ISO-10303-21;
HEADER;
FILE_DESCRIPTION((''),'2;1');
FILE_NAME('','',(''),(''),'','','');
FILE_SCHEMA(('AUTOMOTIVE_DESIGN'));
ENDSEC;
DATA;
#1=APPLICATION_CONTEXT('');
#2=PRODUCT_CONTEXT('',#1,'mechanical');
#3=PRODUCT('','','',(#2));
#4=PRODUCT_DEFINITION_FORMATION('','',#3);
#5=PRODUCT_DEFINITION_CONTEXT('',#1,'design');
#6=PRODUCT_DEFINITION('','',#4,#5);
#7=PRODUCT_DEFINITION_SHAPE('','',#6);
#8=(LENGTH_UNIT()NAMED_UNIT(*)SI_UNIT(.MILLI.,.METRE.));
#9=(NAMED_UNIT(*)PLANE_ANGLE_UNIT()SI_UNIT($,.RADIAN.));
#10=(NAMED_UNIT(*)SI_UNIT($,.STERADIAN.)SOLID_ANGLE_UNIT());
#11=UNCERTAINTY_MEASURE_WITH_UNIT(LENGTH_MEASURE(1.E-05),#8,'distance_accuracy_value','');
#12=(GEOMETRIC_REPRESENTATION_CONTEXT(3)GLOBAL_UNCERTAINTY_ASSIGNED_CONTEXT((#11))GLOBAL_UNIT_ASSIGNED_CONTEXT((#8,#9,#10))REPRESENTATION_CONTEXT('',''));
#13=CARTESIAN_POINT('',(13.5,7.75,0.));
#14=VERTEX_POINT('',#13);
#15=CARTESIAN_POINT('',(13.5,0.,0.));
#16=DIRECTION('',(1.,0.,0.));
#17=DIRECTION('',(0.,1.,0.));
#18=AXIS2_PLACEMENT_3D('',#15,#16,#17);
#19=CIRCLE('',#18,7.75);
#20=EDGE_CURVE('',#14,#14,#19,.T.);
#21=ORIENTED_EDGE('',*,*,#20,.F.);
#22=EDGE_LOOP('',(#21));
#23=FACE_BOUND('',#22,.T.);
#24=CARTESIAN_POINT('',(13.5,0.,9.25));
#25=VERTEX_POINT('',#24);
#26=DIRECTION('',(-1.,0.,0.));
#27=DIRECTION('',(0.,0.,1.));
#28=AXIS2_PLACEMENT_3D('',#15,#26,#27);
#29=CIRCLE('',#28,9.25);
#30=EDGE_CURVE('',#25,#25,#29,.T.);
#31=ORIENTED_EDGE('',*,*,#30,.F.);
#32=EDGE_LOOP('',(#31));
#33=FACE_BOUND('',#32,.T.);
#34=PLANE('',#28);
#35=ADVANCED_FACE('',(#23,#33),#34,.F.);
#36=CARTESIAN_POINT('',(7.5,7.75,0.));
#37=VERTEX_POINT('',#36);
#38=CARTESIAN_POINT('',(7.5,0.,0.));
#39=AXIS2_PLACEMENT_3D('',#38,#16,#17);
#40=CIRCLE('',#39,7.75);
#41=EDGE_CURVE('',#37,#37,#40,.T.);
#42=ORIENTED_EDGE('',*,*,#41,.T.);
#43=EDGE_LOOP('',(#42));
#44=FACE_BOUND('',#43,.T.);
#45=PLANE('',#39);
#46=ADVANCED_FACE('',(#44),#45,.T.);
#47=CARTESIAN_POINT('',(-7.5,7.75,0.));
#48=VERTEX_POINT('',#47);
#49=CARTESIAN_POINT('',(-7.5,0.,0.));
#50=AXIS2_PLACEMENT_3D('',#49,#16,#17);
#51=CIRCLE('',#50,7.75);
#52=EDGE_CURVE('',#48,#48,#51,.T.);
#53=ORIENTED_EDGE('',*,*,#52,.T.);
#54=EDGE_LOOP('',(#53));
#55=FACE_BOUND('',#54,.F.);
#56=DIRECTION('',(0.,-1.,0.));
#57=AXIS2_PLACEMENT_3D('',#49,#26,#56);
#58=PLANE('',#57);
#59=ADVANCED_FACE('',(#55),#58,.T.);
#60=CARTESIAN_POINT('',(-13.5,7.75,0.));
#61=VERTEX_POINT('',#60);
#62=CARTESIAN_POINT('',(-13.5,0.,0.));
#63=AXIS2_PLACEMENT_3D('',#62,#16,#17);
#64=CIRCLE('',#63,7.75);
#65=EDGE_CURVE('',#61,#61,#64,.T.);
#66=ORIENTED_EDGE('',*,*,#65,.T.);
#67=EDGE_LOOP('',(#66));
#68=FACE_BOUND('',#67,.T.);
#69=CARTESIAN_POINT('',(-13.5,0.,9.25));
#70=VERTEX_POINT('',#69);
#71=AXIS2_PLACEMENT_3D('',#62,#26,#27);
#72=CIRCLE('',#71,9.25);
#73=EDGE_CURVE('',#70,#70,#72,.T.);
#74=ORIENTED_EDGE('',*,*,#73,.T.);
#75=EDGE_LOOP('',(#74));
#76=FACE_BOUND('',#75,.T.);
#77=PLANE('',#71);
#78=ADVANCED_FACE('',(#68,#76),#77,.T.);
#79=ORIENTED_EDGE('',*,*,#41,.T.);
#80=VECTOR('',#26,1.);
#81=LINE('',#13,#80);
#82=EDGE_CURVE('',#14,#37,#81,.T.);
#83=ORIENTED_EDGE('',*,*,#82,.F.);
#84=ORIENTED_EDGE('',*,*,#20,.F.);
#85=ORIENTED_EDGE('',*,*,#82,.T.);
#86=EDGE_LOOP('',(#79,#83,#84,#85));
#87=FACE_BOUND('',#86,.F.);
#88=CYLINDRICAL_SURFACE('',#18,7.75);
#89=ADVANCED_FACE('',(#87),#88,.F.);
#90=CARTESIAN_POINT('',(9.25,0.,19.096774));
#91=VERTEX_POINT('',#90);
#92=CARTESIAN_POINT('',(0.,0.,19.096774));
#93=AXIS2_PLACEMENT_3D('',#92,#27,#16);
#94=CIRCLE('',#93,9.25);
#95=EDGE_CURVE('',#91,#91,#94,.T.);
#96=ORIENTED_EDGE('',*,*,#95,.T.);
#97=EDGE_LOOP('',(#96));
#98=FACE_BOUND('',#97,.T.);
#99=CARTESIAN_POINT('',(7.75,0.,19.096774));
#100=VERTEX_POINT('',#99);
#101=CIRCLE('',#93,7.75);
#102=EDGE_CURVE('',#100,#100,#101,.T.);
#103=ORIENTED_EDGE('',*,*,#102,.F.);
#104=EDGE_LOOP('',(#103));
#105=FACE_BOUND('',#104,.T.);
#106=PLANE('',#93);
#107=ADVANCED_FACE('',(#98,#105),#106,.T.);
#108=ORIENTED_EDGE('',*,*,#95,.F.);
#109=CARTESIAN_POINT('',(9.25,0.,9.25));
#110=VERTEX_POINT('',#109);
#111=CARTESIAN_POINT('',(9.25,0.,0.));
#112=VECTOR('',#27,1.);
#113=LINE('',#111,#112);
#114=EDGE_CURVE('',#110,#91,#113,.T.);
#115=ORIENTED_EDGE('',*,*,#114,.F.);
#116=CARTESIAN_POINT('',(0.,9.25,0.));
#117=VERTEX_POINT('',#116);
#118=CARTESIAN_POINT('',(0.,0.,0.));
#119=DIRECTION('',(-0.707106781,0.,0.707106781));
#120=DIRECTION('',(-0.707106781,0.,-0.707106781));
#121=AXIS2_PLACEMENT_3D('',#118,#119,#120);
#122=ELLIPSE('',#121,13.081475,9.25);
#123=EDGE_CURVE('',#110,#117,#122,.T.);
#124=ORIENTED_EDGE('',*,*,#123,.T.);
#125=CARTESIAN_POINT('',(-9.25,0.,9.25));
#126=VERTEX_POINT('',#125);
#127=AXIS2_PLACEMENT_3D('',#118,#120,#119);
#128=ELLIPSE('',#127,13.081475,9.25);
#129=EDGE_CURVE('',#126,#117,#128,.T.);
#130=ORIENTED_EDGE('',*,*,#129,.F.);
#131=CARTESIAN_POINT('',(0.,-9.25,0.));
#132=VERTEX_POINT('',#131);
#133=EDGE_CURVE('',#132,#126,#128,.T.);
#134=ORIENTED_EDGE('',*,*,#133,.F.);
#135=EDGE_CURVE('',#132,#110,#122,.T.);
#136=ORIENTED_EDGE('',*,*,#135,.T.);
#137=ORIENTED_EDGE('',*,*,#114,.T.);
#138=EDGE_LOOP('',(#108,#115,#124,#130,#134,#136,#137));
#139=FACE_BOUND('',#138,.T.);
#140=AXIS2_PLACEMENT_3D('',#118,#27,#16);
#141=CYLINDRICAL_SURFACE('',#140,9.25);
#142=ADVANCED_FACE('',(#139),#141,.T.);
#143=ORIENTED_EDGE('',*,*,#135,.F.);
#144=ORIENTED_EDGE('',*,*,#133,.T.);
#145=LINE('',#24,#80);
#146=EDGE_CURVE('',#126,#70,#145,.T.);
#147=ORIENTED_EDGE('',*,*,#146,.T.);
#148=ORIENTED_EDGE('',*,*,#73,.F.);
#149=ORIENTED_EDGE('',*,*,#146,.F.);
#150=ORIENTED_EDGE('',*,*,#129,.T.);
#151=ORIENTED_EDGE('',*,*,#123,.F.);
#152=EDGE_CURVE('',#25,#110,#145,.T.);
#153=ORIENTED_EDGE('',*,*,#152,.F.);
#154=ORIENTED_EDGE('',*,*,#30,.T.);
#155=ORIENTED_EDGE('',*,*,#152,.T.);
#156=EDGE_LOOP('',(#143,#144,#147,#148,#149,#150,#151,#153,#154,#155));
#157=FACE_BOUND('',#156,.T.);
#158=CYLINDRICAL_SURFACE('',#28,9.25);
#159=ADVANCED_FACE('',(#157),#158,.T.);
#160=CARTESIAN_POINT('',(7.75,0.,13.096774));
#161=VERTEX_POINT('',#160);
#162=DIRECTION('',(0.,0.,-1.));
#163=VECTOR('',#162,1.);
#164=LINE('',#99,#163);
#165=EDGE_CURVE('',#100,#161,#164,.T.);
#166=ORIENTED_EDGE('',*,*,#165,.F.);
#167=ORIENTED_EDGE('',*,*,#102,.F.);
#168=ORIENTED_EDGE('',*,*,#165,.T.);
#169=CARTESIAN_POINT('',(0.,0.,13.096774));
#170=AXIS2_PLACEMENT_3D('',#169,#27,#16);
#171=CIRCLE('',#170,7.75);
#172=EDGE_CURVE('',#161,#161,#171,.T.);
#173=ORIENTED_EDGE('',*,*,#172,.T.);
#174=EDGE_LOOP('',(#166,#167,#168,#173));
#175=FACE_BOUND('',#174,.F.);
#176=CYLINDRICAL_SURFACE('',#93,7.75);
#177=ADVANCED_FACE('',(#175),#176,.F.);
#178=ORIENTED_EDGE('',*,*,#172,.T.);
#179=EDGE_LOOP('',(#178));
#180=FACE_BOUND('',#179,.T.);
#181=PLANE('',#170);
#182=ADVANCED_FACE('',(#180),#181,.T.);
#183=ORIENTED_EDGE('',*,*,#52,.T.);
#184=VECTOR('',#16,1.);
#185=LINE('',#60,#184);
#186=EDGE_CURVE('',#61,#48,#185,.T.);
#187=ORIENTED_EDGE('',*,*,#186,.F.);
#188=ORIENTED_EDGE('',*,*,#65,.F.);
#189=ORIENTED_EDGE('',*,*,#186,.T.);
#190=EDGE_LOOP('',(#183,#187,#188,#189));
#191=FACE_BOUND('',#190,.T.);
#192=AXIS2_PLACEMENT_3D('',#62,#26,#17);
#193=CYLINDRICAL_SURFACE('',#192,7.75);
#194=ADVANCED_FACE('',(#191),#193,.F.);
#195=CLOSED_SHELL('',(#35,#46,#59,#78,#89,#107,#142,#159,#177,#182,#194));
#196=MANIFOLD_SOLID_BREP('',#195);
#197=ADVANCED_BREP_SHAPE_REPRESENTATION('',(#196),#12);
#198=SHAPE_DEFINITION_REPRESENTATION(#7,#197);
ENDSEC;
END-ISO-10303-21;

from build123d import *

# Parameters (mm, degrees)
F4_R     = 7.75
F5_DEPTH = 6
F6_R     = 7.75
F7_DEPTH = 6


# Not quite as in the source:
# - a pattern or mirror of a feature is missing from the dataset's text; its kind, count and spacing are read off the source's solid


with BuildPart() as f1:
    # F0 (on Front) → F1 (revolve)
    with BuildSketch(Plane.XZ):
        Polygon((13.5, 9.25), (0, 9.25), (-13.5, 9.25), (-13.5, 0), (0, 0), (13.5, 0), align=None)
    revolve(axis=Axis((6.75, 0, 0), (-1, 0, 0)))

    # F2 (on Front) → F3 (revolve)
    with BuildSketch(Plane.XZ):
        Polygon((9.25, 19.0967741935), (0, 19.0967741935), (0, 8.3548387097), (0, 0), (9.25, 0), (9.25, 8.3548387097), align=None)
    revolve(axis=Axis((0, 0, 13.7258064516), (0, 0, 1)))

    # F4 (on face) → F5 (cut)
    with BuildSketch(Plane.YZ.offset(13.5)):
        Circle(F4_R)
    f5 = extrude(amount=-F5_DEPTH, mode=Mode.SUBTRACT)

    # F5_copies: F5 across plane
    add(f5.mirror(Plane(origin=(0, 0, 0), x_dir=(0, 0, -1), z_dir=(-1, 0, 0))), mode=Mode.SUBTRACT)

    # F6 (on face) → F7 (cut)
    with BuildSketch(Plane.XY.offset(19.0967741935)):
        Circle(F6_R)
    extrude(amount=-F7_DEPTH, mode=Mode.SUBTRACT)


solid = f1.part
